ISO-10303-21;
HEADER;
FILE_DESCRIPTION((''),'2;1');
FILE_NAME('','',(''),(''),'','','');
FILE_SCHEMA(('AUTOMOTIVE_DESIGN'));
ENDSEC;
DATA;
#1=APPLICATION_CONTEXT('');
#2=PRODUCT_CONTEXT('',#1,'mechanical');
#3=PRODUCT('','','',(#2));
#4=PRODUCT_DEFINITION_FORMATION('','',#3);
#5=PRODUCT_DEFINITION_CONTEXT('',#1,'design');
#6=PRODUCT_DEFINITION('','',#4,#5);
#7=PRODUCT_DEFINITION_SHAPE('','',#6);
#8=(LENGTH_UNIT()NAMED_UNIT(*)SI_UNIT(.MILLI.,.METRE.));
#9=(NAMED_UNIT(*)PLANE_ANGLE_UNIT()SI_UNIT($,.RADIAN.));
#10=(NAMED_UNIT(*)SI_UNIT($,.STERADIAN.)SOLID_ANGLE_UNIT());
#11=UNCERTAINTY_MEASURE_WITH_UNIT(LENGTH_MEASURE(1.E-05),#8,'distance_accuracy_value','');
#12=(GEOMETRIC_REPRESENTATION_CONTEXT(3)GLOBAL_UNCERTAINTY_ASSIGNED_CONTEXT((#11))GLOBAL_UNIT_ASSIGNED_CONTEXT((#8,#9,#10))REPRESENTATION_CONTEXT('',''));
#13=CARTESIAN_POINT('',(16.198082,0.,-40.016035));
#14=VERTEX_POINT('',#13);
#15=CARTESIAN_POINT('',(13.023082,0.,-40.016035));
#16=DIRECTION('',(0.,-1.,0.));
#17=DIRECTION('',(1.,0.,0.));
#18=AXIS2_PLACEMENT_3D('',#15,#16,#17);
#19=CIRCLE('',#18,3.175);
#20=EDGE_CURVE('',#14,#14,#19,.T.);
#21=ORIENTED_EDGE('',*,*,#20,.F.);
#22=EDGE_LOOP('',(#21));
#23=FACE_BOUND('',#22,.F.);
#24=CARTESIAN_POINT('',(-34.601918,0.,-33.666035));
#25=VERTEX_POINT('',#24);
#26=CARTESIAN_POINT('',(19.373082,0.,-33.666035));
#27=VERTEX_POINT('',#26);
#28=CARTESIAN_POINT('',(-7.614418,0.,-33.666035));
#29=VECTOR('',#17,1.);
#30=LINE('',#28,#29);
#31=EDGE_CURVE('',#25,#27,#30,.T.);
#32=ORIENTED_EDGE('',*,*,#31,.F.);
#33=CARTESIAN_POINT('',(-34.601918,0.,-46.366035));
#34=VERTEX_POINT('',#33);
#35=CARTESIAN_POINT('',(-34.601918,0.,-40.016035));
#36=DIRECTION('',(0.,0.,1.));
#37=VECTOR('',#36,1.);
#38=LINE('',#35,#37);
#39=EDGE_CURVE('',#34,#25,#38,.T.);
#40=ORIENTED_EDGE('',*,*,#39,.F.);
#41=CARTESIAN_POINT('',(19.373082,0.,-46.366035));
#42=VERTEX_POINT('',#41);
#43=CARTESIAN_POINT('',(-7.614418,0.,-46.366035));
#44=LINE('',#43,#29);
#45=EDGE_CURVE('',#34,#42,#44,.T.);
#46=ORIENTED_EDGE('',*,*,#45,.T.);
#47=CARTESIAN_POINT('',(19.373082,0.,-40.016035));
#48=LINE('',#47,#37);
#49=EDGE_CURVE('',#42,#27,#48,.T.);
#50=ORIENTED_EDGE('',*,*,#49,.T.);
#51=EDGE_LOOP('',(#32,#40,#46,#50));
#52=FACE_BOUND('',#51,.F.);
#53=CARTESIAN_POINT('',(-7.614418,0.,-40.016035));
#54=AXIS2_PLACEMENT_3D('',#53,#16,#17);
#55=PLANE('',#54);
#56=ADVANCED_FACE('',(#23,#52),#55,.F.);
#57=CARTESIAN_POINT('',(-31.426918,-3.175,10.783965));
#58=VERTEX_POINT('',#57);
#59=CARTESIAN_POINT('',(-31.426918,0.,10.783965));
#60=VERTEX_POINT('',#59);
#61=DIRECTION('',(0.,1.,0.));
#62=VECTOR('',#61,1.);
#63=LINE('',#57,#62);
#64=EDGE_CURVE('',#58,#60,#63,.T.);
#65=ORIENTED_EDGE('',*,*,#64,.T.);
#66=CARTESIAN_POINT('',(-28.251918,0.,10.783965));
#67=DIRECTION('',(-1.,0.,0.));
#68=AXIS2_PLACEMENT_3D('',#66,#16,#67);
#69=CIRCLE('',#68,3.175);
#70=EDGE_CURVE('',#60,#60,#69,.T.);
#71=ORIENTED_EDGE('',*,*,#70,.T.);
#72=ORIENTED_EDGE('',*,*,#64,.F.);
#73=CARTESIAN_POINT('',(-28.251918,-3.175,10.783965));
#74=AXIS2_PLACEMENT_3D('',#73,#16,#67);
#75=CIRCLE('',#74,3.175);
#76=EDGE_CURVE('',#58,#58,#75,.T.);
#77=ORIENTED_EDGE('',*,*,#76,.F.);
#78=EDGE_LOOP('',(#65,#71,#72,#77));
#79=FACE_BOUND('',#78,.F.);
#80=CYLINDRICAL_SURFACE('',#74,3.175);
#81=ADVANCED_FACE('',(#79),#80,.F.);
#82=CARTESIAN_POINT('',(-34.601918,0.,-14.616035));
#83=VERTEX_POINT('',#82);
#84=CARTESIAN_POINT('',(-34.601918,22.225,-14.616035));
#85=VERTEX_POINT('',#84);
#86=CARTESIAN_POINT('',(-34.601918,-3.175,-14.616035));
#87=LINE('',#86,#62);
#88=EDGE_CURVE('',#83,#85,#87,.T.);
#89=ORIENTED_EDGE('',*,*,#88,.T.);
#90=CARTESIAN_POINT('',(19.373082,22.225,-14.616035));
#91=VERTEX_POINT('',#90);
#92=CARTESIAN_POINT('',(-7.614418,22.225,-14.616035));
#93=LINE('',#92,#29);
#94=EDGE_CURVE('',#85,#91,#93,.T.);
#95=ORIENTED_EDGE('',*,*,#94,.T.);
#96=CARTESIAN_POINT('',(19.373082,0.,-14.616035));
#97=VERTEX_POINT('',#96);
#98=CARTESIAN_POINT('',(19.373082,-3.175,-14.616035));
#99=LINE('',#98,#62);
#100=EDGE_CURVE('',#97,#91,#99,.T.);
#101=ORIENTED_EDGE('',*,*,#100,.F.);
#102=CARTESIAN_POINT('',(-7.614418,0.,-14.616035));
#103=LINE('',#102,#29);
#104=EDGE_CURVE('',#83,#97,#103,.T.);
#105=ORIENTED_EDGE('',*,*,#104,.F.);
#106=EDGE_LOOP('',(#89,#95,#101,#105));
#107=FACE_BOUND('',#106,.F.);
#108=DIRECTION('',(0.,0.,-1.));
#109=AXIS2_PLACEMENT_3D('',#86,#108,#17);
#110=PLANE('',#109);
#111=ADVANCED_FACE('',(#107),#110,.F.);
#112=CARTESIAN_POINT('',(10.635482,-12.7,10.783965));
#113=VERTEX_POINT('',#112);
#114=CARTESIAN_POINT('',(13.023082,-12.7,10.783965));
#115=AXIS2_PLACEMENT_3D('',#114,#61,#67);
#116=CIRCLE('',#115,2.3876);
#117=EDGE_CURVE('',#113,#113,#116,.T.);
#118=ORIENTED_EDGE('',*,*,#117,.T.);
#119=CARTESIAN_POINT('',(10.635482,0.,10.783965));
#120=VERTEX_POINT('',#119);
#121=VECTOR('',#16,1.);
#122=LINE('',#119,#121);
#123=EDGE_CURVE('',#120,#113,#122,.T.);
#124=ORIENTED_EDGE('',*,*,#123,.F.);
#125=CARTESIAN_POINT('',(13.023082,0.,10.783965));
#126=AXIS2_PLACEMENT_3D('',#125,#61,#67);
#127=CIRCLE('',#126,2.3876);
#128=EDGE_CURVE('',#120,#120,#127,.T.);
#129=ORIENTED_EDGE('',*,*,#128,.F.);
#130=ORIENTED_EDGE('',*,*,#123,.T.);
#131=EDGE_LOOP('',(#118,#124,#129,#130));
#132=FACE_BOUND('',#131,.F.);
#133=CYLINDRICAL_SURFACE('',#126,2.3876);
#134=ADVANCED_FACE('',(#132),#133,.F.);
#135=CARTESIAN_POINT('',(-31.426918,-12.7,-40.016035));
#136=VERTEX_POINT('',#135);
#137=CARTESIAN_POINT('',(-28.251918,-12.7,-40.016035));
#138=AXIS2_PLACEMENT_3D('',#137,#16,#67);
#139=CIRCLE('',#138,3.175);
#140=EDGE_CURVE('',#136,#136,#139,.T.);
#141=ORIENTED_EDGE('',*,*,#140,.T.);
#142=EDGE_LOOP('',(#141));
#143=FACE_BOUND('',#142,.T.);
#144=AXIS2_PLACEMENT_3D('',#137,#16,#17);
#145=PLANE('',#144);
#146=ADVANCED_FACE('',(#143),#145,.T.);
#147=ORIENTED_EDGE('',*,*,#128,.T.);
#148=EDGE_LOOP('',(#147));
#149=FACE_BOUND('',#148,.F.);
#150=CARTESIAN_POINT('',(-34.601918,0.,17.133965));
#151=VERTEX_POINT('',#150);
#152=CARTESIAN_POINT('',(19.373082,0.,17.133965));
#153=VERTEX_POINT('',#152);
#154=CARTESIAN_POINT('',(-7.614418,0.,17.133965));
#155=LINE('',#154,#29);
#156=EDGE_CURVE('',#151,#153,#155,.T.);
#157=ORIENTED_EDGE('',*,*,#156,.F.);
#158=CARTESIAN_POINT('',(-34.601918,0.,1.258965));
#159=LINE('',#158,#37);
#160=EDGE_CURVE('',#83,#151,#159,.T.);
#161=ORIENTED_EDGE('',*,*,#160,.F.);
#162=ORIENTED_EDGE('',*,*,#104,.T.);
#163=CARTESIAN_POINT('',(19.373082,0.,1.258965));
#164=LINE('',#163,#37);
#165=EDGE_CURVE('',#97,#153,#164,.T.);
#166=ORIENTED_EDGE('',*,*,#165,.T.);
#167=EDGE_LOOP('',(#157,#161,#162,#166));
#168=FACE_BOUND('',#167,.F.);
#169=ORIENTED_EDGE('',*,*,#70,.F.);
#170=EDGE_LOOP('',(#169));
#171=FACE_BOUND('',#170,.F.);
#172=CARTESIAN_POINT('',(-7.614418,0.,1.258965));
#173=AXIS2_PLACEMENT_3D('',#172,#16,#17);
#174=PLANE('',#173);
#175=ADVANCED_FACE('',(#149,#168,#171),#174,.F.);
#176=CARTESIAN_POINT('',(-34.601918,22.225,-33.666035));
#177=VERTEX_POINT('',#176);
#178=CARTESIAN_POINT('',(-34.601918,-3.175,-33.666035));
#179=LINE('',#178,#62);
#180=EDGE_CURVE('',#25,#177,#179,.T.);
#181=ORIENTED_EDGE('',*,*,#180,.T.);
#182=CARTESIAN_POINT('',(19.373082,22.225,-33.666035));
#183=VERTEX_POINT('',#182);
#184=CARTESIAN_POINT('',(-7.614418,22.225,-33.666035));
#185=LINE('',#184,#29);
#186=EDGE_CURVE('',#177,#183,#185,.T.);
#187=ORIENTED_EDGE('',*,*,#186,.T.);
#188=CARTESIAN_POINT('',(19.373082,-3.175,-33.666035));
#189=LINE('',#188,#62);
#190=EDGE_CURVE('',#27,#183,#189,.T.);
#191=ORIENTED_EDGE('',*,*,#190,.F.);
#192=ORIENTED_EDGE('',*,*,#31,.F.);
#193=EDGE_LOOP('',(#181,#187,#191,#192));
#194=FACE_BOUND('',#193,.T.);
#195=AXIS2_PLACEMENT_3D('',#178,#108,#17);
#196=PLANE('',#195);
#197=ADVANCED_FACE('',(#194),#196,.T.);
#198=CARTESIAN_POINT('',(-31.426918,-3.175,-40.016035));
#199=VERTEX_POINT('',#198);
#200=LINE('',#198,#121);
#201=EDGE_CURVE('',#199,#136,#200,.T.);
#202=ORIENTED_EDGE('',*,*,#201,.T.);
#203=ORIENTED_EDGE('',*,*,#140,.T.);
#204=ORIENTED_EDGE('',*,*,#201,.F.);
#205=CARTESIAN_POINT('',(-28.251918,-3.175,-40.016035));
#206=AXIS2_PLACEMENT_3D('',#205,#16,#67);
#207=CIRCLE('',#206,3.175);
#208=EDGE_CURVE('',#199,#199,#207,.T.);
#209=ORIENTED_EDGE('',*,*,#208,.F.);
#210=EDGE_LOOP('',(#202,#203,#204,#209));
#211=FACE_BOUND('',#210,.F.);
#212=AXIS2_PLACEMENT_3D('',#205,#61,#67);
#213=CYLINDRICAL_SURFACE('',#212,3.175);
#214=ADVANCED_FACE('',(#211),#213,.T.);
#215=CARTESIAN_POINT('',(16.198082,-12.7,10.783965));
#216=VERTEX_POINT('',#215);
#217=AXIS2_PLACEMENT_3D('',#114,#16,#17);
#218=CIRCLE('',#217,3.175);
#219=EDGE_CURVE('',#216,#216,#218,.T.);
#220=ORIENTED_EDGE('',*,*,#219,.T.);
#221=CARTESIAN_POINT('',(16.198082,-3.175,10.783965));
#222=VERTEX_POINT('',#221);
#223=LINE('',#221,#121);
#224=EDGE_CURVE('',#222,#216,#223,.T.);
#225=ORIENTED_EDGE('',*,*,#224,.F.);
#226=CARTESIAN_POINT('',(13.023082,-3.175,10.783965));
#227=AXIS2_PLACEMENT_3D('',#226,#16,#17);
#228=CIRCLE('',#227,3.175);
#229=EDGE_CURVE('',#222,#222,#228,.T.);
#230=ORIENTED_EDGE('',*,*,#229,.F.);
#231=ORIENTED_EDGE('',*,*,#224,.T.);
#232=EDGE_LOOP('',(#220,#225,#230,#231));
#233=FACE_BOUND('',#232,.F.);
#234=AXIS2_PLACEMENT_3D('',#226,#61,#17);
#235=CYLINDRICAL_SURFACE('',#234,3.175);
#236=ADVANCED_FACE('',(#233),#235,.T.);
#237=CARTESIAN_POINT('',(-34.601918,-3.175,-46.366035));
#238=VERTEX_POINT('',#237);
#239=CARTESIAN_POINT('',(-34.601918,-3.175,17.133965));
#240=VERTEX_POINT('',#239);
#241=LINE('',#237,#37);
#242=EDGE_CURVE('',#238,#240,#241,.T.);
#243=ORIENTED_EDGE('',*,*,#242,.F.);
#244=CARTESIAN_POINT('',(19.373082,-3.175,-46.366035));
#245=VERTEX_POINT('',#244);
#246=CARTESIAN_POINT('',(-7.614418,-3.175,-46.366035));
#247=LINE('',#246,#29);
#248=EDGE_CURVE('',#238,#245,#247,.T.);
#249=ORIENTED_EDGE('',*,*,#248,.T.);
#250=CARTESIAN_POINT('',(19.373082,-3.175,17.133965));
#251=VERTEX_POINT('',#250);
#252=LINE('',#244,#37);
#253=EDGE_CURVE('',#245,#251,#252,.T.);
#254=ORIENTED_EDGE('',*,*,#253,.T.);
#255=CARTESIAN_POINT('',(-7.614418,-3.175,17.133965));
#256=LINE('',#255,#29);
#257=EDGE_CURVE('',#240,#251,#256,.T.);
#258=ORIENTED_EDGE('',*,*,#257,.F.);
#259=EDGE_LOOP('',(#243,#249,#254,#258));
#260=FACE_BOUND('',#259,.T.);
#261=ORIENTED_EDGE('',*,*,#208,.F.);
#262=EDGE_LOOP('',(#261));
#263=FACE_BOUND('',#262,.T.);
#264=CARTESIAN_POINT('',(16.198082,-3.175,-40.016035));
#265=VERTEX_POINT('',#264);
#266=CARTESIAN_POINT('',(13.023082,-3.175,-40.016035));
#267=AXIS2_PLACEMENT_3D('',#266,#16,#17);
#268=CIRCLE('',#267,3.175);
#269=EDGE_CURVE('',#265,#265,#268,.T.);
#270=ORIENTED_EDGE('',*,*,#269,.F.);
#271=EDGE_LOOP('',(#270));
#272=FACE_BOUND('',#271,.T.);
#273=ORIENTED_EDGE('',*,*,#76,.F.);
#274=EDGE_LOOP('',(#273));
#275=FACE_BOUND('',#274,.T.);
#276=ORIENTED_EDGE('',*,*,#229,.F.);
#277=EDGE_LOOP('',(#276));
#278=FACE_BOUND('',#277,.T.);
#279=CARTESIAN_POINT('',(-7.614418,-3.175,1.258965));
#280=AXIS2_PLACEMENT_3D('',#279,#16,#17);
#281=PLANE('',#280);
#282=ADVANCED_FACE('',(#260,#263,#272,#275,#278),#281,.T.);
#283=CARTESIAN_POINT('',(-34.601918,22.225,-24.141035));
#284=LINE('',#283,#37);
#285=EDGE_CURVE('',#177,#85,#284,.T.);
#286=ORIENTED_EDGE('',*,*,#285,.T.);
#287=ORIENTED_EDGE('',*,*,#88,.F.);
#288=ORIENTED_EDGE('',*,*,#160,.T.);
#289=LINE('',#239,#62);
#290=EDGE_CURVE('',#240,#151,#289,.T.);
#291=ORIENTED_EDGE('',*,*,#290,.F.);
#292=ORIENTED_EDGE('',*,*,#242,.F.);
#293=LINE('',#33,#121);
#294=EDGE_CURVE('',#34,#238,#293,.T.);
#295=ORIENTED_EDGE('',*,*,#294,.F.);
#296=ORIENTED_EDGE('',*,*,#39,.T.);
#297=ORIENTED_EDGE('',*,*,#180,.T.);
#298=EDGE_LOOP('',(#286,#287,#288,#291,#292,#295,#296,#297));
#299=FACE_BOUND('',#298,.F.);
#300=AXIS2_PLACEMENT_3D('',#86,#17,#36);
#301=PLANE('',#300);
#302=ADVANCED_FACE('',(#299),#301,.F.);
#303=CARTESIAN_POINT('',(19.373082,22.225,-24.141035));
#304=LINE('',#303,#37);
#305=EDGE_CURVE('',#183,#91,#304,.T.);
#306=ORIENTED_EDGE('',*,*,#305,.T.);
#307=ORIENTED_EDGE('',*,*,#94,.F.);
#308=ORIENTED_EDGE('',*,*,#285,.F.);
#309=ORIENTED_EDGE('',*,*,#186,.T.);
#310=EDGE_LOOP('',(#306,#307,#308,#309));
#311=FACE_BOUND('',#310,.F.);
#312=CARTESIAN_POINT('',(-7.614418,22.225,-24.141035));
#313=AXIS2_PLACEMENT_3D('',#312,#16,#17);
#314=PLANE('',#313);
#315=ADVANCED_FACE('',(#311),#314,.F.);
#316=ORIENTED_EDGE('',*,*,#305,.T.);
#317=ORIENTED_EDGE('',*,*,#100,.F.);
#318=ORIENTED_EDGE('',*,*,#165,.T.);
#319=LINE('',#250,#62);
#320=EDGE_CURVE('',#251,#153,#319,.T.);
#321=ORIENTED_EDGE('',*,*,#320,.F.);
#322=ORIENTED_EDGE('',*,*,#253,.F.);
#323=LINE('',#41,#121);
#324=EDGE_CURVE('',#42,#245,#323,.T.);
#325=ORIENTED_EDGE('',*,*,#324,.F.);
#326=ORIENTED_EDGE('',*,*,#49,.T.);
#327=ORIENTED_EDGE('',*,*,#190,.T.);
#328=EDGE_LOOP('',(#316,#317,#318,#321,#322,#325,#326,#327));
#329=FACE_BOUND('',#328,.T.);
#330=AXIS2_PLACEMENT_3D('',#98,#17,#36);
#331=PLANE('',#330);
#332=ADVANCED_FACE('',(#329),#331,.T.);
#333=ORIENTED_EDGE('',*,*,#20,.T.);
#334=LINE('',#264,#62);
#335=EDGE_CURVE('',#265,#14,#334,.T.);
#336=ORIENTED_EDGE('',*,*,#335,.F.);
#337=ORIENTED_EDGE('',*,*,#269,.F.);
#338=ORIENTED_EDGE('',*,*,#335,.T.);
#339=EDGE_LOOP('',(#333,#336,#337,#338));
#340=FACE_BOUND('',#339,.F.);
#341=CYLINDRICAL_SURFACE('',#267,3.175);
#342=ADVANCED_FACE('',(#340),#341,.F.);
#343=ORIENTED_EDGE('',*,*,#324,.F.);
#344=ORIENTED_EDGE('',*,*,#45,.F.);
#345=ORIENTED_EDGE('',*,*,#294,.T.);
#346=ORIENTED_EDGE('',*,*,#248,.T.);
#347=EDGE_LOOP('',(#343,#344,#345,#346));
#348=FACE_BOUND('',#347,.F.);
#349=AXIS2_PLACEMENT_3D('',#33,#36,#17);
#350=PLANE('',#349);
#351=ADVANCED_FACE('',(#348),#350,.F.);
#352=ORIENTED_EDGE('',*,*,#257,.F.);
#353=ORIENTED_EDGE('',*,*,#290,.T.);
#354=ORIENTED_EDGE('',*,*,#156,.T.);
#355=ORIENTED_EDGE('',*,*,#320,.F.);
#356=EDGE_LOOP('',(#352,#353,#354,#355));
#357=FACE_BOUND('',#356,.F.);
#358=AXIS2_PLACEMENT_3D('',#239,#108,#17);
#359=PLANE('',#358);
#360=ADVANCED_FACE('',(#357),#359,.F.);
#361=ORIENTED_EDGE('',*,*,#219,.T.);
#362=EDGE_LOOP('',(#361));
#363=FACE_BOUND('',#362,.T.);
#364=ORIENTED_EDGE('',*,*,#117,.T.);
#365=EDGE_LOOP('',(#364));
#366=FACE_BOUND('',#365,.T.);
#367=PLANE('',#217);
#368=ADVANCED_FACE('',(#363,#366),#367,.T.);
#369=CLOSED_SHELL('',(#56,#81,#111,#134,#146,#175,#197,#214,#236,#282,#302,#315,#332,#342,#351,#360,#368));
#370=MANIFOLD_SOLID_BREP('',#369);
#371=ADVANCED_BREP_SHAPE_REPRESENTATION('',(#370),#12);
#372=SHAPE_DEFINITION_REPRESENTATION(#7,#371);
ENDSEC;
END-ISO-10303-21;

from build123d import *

# Parameters (mm, degrees)
F0_W      = 53.975
F0_H      = 12.7
F1_DEPTH  = 3.175
F3_DEPTH  = 9.525
F4_R      = 3.175
F5_DEPTH  = 3.176
F6_W      = 53.975
F6_H      = 19.05
F7_DEPTH  = 25.4
F8_W      = 53.975
F8_H      = 31.75
F9_DEPTH  = 3.175
F11_DEPTH = 25.401
F12_R     = 3.175
F13_DEPTH = 9.525
F15_DEPTH = 15.4432


# Not quite as in the source:
# - a length typed as a fraction of an inch, garbled in the dataset ("3 / 203.2 mm" for 3/8 in), is restored


with BuildPart() as f1:
    # F0 (on Front) → F1 (new body)
    with BuildSketch(Plane.XZ):
        with Locations((-7.6144175836, -40.016034618)):
            Rectangle(F0_W, F0_H)
    extrude(amount=F1_DEPTH)

    # F2 (on face) → F3 (join)
    with BuildSketch(Plane.XZ.offset(3.175)):
        with BuildLine():
            ThreePointArc((-25.0769175836, -40.016034618), (-28.2519175836, -36.841034618), (-31.4269175836, -40.016034618))
            ThreePointArc((-31.4269175836, -40.016034618), (-28.2519175836, -43.191034618), (-25.0769175836, -40.016034618))
        make_face()
    extrude(amount=F3_DEPTH)

    # F4 (on face) → F5 (cut, through all)
    with BuildSketch(Plane.XZ.offset(3.175)):
        with Locations((13.0230824164, -40.016034618)):
            Circle(F4_R)
    extrude(amount=-F5_DEPTH, mode=Mode.SUBTRACT)

    # F6 (on face) → F7 (join)
    with BuildSketch(Plane.XZ.offset(3.175)):
        with Locations((-7.6144175836, -24.141034618)):
            Rectangle(F6_W, F6_H)
    extrude(amount=-F7_DEPTH)

    # F8 (on face) → F9 (join)
    with BuildSketch(Plane.XZ.offset(3.175)):
        with Locations((-7.6144175836, 1.258965382)):
            Rectangle(F8_W, F8_H)
    extrude(amount=-F9_DEPTH)

    # F10 (on face) → F11 (cut, through all)
    with BuildSketch(Plane.XZ.offset(3.175)):
        with BuildLine():
            ThreePointArc((-25.0769175836, 10.783965382), (-28.2519175836, 13.958965382), (-31.4269175836, 10.783965382))
            ThreePointArc((-31.4269175836, 10.783965382), (-28.2519175836, 7.608965382), (-25.0769175836, 10.783965382))
        make_face()
    extrude(amount=-F11_DEPTH, mode=Mode.SUBTRACT)

    # F12 (on face) → F13 (join)
    with BuildSketch(Plane.XZ.offset(3.175)):
        with Locations((13.0230824164, 10.783965382)):
            Circle(F12_R)
    extrude(amount=F13_DEPTH)

    # F14 (on face) → F15 (cut)
    with BuildSketch(Plane(origin=(0, 0, 0), x_dir=(-1, 0, 0), z_dir=(0, 1, 0))):
        with BuildLine():
            ThreePointArc((-15.4106824164, 10.783965382), (-13.0230824164, 8.396365382), (-10.6354824164, 10.783965382))
            ThreePointArc((-10.6354824164, 10.783965382), (-13.0230824164, 13.171565382), (-15.4106824164, 10.783965382))
        make_face()
    extrude(amount=-F15_DEPTH, mode=Mode.SUBTRACT)


solid = f1.part
